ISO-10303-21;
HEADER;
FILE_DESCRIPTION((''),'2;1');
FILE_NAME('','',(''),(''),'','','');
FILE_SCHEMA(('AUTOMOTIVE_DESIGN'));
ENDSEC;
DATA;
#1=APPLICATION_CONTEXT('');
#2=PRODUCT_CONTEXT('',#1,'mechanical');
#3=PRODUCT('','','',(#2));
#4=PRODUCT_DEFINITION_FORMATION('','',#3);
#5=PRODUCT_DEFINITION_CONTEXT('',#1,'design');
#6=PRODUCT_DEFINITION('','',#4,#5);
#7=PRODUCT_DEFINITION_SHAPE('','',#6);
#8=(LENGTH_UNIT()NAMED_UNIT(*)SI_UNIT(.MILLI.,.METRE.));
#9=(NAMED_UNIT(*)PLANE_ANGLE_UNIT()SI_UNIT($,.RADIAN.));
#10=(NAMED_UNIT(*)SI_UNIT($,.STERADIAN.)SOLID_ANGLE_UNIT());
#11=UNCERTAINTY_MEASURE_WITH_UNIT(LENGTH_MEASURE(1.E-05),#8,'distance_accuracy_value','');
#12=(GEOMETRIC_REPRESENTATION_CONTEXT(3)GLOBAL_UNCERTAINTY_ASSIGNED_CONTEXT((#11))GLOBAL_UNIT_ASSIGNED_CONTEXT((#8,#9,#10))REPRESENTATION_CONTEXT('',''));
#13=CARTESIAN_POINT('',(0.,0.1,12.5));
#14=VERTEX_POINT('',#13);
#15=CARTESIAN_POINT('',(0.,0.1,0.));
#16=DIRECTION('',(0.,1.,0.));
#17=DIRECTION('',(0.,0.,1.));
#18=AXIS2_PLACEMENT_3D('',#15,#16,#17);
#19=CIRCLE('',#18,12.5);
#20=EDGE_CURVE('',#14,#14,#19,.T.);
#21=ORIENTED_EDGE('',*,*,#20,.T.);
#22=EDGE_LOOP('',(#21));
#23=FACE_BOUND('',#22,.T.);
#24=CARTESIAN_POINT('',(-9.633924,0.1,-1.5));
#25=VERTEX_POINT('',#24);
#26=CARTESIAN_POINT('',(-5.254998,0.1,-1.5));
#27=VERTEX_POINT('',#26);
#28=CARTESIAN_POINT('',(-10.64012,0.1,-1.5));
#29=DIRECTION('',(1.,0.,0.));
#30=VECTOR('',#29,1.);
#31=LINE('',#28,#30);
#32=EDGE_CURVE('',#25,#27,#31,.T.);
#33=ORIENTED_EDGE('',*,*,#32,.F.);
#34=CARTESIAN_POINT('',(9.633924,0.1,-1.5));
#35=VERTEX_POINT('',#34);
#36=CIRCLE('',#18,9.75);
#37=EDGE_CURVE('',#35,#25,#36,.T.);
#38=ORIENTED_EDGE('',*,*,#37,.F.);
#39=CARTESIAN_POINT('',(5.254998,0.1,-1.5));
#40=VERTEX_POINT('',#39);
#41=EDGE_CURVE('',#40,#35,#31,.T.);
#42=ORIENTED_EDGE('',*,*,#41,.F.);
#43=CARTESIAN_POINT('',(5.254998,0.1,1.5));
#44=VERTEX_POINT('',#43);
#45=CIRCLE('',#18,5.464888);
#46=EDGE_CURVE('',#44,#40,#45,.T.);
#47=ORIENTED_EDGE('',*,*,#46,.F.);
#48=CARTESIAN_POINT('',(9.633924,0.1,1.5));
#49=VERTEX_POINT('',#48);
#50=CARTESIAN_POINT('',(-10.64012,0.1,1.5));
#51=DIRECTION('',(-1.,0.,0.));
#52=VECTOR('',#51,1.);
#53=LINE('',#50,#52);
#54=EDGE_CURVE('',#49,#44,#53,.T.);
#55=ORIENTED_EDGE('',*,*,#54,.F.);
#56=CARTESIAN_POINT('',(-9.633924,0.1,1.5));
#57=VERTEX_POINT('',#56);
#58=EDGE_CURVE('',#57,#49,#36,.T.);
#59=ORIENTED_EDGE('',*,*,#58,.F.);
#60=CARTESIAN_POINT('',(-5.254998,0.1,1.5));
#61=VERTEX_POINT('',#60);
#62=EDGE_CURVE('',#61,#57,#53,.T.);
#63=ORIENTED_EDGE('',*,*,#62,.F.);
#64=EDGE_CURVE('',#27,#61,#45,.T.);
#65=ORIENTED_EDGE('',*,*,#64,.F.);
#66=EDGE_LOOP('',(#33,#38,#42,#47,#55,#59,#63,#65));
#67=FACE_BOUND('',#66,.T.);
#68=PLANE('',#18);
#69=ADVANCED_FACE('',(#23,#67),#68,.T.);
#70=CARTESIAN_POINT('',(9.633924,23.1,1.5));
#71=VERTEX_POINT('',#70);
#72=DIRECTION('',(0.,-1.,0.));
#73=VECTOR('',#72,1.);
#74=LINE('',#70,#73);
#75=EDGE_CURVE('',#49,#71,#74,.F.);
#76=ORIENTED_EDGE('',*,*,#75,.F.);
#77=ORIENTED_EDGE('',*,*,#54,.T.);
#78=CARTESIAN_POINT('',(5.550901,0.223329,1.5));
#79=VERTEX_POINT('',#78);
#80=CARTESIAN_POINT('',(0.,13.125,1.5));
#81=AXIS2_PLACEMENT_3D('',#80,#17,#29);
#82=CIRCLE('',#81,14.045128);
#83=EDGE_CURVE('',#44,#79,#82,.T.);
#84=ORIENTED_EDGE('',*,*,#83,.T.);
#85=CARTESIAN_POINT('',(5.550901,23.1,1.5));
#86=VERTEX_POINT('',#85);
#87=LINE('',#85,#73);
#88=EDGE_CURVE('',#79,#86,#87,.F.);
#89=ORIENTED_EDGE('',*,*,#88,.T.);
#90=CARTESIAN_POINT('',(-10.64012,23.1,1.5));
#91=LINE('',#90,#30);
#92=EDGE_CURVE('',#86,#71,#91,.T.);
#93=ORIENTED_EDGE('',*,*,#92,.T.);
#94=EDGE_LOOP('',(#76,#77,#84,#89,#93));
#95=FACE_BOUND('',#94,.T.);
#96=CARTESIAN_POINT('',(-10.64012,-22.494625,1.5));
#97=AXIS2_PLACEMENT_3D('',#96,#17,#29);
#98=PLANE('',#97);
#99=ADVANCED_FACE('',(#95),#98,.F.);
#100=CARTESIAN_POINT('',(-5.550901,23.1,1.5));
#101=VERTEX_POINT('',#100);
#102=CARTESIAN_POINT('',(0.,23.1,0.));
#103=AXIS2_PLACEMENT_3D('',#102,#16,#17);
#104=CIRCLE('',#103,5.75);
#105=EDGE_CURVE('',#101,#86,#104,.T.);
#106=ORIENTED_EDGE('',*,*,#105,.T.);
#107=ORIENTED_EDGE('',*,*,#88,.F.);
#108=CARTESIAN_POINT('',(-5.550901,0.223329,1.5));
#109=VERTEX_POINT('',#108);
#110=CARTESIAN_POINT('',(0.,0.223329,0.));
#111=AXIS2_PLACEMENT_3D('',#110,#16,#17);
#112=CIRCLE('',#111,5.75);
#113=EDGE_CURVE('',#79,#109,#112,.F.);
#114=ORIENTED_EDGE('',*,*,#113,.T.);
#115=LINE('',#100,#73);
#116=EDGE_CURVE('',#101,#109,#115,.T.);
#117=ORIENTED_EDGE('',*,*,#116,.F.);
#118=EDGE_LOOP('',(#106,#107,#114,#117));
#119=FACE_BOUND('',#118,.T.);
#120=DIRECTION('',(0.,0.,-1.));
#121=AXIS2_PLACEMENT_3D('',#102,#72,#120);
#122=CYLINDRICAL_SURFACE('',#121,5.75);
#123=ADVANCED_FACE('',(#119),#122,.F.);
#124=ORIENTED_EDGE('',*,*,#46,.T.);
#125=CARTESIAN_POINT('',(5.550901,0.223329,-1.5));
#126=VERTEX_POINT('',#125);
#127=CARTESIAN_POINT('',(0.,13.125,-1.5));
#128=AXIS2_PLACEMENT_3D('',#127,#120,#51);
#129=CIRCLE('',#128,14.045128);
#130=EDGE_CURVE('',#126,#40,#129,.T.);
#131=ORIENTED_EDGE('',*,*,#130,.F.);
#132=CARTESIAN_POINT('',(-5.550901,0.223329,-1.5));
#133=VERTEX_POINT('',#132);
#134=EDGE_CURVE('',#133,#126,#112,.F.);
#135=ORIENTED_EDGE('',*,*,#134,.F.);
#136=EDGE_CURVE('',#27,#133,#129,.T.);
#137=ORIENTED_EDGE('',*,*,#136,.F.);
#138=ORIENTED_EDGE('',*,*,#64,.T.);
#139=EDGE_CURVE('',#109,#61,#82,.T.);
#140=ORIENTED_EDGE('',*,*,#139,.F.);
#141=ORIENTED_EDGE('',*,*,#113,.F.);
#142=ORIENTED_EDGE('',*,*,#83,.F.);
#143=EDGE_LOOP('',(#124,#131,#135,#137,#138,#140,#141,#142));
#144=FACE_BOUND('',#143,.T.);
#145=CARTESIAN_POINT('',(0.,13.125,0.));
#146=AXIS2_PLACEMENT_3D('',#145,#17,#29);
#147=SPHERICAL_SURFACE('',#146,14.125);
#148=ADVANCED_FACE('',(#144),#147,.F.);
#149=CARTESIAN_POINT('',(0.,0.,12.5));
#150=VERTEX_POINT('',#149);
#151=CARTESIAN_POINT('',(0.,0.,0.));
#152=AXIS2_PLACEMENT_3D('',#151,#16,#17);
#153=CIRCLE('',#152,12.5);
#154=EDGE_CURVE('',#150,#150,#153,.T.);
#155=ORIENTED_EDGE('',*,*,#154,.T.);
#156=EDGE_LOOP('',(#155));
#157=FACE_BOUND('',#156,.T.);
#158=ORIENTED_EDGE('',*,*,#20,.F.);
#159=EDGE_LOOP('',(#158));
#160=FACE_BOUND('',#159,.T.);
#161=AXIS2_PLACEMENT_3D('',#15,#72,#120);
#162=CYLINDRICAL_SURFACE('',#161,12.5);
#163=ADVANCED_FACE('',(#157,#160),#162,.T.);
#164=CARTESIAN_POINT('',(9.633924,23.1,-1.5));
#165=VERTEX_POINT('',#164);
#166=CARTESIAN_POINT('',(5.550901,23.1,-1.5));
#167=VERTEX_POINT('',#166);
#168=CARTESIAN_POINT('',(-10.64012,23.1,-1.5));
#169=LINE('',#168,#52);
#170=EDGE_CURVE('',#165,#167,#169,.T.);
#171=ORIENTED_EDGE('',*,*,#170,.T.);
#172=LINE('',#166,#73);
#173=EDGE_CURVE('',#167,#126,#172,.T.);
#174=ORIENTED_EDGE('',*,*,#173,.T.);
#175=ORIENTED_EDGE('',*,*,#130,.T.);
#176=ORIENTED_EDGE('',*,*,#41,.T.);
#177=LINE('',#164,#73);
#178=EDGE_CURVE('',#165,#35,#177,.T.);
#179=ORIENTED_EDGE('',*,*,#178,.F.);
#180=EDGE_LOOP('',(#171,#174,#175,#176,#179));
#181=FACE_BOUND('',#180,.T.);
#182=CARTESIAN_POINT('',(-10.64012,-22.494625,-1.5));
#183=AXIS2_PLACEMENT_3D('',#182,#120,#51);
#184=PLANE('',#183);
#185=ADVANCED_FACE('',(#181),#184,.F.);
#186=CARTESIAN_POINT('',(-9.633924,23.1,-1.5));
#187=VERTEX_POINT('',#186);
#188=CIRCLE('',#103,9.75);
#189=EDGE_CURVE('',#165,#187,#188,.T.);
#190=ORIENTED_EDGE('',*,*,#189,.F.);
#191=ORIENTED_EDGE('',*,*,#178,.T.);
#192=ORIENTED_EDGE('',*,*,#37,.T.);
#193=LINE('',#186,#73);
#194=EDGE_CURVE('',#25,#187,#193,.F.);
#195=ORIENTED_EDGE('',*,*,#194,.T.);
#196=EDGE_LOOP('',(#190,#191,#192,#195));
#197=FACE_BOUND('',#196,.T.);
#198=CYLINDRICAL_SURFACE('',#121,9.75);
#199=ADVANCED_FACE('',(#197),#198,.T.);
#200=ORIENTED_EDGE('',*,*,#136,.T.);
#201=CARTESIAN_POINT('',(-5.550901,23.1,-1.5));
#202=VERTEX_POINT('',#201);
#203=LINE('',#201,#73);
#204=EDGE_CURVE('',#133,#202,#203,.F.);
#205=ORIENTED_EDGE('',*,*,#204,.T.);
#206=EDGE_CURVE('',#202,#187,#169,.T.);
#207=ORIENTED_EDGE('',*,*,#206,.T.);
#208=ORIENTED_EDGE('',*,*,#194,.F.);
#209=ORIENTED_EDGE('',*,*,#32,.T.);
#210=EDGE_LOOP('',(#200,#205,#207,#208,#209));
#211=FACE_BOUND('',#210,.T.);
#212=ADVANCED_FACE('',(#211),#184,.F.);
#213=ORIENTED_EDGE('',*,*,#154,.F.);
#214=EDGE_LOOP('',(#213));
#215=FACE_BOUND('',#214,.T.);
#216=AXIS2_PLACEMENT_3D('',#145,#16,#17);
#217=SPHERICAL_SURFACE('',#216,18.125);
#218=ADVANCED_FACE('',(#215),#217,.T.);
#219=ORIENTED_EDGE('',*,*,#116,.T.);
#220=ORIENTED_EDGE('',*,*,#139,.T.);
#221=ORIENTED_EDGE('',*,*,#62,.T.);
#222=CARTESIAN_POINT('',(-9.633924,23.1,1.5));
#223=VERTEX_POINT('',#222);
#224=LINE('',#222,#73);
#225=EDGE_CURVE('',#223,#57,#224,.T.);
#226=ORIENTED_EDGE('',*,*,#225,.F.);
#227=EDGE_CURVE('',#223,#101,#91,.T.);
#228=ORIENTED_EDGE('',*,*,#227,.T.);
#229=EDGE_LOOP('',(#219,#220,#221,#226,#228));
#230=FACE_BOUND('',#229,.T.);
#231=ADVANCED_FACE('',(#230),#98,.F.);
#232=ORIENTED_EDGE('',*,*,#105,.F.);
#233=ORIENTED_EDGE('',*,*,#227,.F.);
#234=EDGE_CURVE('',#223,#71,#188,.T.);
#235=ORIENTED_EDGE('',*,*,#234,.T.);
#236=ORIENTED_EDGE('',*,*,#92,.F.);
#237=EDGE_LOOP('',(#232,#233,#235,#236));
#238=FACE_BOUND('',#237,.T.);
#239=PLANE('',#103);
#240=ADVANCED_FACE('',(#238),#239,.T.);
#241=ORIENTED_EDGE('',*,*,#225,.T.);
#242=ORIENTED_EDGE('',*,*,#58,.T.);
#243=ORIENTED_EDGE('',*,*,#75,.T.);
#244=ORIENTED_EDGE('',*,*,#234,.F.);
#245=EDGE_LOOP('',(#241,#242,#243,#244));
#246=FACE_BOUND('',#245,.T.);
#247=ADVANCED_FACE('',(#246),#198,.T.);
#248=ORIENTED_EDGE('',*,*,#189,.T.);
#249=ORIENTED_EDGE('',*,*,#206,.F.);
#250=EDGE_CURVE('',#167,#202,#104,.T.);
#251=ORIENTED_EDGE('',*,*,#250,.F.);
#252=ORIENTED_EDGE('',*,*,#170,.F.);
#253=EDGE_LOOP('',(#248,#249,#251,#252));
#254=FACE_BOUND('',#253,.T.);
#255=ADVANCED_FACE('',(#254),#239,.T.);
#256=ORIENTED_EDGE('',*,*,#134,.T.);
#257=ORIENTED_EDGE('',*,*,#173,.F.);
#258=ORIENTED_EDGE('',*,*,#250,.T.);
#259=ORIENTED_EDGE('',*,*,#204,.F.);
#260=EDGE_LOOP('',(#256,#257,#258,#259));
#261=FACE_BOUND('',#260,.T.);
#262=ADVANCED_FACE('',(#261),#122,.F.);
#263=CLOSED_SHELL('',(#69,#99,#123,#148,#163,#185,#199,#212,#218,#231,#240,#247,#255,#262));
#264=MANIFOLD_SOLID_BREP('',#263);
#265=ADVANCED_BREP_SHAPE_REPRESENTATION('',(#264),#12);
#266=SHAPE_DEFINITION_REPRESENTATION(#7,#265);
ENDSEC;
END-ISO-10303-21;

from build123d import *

# Parameters (mm, degrees)
SKETCH1_R           = 12.5
BOSS_EXTRUDE1_DEPTH = 0.1
DOME1_FACE_RADIUS   = 12.5
DOME1_HEIGHT        = 5
SKETCH2_R           = 9.75
BOSS_EXTRUDE2_DEPTH = 23
CUT_EXTRUDE1_REACH  = 35.198
SKETCH3_W           = 22.394577403
SKETCH3_H           = 3


# Read off the part's stored shape, not the designer's step: Shell3
with BuildPart() as part:
    # Sketch1 → Boss-Extrude1 (new body)
    with BuildSketch(Plane(origin=(0, 0, 0), x_dir=(1, 0, 0), z_dir=(0, 1, 0))):
        with Locations(Location((0, 0, 0), (0, 0, 270))):
            Circle(SKETCH1_R)
    extrude(amount=BOSS_EXTRUDE1_DEPTH)

    # Dome1: a dome of height H over a round flat face of radius A is a cap of a sphere of radius (A * A + H * H) / (2 * H)
    dome1_r = (DOME1_FACE_RADIUS * DOME1_FACE_RADIUS + DOME1_HEIGHT * DOME1_HEIGHT) / (2 * DOME1_HEIGHT)
    dome1_base = Plane((0, 0, 0), z_dir=(0, -1, 0))
    with Locations(dome1_base.offset(DOME1_HEIGHT - dome1_r)):
        dome1_ball = Sphere(dome1_r, mode=Mode.PRIVATE)
    add(split(dome1_ball, bisect_by=dome1_base, keep=Keep.TOP, mode=Mode.PRIVATE))

    # Sketch2 → Boss-Extrude2 (add)
    with BuildSketch(Plane(origin=(0, 0.1, 0), x_dir=(1, 0, 0), z_dir=(0, 1, 0))):
        with Locations(Location((0, 0, 0), (0, 0, 270))):
            Circle(SKETCH2_R)
    extrude(amount=BOSS_EXTRUDE2_DEPTH)

    # Shell3 outline → Shell3 (revolve, cut)
    with BuildSketch(Plane.XY):
        with BuildLine():
            Line((0, 23.1), (0, -1))
            ThreePointArc((0, -1), (2.939346569, -0.690783248), (5.750000013, 0.223328602))
            Line((5.750000013, 0.223328602), (5.75, 23.1))
            Line((5.75, 23.1), (0, 23.1))
        make_face()
    revolve(axis=Axis((0, 0, 0), (0, 1, 0)), mode=Mode.SUBTRACT)

    # Cut-Extrude1: up to this face of the body (flat: up to its plane)
    cut_extrude1_end = Plane(part.part.faces().sort_by_distance((0, 0.1, -12.146446609))[0])
    # Sketch3 → Cut-Extrude1 (cut, up to the picked face)
    with BuildSketch(Plane(origin=(0, 23.1, 0), x_dir=(1, 0, 0), z_dir=(0, 1, 0)), mode=Mode.PRIVATE) as cut_extrude1_sk1:
        with Locations((0.557168459, 0)):
            Rectangle(SKETCH3_W, SKETCH3_H)
    cut_extrude1_tool1 = split(extrude(cut_extrude1_sk1.sketch, amount=-CUT_EXTRUDE1_REACH, mode=Mode.PRIVATE), bisect_by=cut_extrude1_end, keep=Keep.BOTH, mode=Mode.PRIVATE)
    add(cut_extrude1_tool1.solids().sort_by(Axis((0.557168, 23.1, 0), (0, -1, 0)))[0], mode=Mode.SUBTRACT)


solid = part.part
